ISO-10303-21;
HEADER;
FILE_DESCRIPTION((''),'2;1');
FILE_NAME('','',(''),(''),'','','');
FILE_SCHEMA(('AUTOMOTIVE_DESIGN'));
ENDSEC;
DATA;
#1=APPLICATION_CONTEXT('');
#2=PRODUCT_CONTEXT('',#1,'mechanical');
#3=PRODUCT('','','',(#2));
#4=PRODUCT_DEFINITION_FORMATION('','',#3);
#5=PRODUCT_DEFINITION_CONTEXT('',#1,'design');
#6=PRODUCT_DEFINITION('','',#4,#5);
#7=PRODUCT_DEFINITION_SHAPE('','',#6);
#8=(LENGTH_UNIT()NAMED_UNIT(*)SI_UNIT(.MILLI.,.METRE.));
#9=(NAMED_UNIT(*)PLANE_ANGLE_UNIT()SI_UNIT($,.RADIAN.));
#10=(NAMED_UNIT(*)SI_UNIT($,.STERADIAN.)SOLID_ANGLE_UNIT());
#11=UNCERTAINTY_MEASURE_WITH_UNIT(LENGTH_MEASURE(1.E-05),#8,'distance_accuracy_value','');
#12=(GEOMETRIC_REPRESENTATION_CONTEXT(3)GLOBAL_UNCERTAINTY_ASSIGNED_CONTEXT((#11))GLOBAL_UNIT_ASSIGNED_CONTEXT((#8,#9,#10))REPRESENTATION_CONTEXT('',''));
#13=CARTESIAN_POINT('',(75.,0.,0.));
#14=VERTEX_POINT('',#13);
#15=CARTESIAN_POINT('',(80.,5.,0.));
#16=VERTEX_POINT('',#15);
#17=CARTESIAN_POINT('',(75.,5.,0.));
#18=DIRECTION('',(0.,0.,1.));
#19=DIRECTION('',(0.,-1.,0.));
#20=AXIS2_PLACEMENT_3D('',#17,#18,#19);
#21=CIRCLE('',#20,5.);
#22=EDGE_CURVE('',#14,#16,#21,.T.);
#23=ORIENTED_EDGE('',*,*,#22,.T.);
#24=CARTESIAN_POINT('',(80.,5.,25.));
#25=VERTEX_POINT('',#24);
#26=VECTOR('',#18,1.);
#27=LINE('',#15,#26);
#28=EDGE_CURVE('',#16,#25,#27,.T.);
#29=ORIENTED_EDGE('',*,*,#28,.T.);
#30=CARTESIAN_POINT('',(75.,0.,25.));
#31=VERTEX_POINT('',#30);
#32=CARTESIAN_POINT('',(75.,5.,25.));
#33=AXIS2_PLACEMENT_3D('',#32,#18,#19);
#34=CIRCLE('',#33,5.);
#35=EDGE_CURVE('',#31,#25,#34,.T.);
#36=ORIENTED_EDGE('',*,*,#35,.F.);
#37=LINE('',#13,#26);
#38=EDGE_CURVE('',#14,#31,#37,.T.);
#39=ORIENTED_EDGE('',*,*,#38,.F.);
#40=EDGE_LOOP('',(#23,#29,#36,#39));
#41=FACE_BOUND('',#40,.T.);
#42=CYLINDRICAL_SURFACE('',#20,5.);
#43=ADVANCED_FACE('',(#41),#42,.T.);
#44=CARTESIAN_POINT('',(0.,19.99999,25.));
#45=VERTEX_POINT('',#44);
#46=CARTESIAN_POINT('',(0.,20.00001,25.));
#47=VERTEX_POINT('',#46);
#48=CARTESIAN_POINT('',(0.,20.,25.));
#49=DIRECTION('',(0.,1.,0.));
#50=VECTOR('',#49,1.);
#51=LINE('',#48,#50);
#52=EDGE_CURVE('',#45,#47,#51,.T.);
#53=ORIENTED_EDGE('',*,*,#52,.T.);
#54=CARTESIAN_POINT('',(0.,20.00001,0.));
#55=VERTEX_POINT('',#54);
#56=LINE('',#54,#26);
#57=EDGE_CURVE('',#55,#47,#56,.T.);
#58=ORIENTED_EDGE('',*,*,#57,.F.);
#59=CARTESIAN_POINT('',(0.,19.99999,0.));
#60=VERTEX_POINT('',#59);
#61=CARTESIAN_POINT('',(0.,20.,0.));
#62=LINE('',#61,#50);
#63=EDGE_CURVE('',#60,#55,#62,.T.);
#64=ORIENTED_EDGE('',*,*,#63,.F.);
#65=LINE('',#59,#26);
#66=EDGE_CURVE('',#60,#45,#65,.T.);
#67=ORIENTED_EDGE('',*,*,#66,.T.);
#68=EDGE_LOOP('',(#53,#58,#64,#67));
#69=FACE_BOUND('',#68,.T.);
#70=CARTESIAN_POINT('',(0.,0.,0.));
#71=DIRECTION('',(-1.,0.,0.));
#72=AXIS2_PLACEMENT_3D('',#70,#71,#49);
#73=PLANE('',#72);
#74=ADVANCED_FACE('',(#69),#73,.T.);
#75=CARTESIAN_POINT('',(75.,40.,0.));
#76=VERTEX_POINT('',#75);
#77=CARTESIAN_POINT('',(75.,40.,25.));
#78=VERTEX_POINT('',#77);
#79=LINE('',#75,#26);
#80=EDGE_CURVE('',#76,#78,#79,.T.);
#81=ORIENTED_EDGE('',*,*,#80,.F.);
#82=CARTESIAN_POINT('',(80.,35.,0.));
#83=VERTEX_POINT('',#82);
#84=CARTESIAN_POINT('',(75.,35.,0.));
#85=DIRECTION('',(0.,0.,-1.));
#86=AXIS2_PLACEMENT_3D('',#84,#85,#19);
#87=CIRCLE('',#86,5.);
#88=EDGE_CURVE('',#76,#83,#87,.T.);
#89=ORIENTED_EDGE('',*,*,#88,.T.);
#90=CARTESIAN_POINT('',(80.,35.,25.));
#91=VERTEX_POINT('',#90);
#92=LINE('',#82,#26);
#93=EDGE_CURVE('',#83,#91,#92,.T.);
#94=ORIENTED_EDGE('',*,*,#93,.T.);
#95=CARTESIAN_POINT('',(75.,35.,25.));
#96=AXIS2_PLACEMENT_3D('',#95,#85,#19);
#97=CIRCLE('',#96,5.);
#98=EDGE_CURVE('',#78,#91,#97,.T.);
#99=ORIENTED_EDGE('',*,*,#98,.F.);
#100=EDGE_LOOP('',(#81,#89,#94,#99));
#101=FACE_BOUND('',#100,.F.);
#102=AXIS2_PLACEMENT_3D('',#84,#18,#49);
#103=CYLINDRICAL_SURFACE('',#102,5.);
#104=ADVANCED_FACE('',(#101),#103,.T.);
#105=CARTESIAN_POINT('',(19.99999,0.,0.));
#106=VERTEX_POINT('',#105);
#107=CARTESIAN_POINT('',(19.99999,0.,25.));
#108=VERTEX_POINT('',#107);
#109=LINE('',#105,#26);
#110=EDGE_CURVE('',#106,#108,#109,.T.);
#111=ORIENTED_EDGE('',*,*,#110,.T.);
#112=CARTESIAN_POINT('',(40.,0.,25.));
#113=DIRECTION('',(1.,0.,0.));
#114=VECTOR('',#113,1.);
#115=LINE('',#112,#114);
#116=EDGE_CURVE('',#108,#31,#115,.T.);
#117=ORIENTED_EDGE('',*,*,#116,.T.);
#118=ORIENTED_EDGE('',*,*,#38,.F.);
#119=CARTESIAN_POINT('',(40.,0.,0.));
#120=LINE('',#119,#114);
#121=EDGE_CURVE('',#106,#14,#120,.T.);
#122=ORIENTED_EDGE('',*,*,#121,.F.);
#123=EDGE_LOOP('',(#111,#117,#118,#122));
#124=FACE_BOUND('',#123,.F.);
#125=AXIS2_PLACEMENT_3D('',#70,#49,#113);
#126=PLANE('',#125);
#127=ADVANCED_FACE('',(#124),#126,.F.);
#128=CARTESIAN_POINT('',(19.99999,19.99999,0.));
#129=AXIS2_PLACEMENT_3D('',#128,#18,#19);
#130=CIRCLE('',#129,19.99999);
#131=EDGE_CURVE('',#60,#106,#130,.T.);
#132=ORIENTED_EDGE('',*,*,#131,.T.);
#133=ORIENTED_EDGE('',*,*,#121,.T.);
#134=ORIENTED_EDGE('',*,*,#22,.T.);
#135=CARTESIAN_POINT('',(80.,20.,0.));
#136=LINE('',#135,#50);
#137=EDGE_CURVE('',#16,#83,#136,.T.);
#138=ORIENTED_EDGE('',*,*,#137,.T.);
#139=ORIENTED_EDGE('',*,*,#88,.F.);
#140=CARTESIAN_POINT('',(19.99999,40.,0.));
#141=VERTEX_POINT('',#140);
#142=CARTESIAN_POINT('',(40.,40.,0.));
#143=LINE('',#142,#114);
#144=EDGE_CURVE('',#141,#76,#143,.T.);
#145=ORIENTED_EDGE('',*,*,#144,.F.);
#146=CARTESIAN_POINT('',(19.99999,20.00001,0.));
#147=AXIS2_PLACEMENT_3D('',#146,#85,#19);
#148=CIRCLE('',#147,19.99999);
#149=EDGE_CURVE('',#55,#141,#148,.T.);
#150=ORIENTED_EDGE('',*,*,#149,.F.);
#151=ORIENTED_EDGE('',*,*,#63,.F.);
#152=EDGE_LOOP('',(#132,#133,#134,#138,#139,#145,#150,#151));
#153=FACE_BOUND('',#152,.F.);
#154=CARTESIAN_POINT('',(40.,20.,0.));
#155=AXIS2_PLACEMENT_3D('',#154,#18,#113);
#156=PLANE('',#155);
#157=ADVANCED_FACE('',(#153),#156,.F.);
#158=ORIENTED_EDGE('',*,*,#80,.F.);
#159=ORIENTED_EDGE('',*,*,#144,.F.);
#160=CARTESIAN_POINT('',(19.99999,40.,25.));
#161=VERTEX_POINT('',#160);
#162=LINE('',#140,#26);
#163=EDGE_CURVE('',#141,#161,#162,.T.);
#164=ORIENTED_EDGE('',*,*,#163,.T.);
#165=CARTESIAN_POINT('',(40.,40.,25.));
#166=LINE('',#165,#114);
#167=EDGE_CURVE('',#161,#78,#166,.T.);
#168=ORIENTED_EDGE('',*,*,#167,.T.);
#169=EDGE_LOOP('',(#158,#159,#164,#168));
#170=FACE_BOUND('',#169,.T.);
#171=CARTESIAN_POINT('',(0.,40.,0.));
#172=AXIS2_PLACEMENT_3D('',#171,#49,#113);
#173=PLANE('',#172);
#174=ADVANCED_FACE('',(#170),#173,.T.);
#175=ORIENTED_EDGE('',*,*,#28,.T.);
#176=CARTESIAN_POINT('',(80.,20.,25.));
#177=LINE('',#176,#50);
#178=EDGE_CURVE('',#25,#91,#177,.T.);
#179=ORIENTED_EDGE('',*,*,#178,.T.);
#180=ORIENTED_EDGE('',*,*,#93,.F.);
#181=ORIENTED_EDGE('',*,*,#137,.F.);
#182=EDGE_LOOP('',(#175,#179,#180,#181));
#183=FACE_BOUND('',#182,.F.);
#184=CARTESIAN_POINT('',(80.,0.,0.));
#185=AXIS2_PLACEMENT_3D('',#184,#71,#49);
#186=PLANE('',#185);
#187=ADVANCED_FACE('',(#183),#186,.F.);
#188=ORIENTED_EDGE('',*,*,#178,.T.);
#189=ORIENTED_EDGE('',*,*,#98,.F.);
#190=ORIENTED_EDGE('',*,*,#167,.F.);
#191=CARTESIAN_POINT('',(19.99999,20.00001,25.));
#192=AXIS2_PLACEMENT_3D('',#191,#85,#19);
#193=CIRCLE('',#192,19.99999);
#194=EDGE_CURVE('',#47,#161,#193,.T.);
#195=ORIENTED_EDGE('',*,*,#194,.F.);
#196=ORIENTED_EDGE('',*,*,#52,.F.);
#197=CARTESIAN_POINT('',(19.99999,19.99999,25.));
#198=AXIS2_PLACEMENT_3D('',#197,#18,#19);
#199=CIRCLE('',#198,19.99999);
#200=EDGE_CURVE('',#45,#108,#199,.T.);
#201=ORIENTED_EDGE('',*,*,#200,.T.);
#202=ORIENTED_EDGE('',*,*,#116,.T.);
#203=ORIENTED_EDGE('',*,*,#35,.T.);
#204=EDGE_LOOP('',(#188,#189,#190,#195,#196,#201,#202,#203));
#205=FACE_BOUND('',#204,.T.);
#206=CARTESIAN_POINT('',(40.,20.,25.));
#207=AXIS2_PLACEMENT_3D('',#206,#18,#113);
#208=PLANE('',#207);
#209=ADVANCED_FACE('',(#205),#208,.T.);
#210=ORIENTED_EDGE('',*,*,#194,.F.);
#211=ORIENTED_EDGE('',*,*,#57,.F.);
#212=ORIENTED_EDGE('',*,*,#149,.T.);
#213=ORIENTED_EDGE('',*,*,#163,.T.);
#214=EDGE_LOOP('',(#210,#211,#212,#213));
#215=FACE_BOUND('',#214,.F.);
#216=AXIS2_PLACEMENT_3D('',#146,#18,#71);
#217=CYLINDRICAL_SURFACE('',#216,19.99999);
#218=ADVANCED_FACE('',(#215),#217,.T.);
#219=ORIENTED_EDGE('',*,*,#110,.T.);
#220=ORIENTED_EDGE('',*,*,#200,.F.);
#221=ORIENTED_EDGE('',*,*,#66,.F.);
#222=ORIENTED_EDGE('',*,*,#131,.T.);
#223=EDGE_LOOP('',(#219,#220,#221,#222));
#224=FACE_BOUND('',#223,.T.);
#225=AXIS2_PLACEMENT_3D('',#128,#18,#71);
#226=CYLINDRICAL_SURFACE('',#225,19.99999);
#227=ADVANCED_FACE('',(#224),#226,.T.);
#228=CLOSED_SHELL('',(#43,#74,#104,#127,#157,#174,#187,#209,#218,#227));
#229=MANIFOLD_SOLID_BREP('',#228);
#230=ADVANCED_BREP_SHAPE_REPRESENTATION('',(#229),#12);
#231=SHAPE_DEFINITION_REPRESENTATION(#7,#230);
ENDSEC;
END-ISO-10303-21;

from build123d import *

# Parameters (mm, degrees)
F0_W     = 80
F0_H     = 40
F1_DEPTH = 25
F2_R     = 19.99999
F3_R     = 5


# Not quite as in the source:
# - a fillet or chamfer is up to 0.001 mm smaller than in the source, because OpenCascade refuses the exact size


with BuildPart() as f1:
    # F0 (on Top) → F1 (new body)
    with BuildSketch(Plane.XY):
        with Locations((40, 20)):
            Rectangle(F0_W, F0_H)
    extrude(amount=F1_DEPTH)

    # F2 (radius 20 in the source; OpenCascade refuses exactly that, so slightly less here)
    f2_edges = [f1.edges().sort_by_distance(p)[0] for p in [
        (0, 40, 12.5),
        (0, 0, 12.5),
    ]]
    fillet(f2_edges, radius=F2_R)

    # F3
    f3_edges = [f1.edges().sort_by_distance(p)[0] for p in [
        (80, 40, 12.5),
        (80, 0, 12.5),
    ]]
    fillet(f3_edges, radius=F3_R)


solid = f1.part
